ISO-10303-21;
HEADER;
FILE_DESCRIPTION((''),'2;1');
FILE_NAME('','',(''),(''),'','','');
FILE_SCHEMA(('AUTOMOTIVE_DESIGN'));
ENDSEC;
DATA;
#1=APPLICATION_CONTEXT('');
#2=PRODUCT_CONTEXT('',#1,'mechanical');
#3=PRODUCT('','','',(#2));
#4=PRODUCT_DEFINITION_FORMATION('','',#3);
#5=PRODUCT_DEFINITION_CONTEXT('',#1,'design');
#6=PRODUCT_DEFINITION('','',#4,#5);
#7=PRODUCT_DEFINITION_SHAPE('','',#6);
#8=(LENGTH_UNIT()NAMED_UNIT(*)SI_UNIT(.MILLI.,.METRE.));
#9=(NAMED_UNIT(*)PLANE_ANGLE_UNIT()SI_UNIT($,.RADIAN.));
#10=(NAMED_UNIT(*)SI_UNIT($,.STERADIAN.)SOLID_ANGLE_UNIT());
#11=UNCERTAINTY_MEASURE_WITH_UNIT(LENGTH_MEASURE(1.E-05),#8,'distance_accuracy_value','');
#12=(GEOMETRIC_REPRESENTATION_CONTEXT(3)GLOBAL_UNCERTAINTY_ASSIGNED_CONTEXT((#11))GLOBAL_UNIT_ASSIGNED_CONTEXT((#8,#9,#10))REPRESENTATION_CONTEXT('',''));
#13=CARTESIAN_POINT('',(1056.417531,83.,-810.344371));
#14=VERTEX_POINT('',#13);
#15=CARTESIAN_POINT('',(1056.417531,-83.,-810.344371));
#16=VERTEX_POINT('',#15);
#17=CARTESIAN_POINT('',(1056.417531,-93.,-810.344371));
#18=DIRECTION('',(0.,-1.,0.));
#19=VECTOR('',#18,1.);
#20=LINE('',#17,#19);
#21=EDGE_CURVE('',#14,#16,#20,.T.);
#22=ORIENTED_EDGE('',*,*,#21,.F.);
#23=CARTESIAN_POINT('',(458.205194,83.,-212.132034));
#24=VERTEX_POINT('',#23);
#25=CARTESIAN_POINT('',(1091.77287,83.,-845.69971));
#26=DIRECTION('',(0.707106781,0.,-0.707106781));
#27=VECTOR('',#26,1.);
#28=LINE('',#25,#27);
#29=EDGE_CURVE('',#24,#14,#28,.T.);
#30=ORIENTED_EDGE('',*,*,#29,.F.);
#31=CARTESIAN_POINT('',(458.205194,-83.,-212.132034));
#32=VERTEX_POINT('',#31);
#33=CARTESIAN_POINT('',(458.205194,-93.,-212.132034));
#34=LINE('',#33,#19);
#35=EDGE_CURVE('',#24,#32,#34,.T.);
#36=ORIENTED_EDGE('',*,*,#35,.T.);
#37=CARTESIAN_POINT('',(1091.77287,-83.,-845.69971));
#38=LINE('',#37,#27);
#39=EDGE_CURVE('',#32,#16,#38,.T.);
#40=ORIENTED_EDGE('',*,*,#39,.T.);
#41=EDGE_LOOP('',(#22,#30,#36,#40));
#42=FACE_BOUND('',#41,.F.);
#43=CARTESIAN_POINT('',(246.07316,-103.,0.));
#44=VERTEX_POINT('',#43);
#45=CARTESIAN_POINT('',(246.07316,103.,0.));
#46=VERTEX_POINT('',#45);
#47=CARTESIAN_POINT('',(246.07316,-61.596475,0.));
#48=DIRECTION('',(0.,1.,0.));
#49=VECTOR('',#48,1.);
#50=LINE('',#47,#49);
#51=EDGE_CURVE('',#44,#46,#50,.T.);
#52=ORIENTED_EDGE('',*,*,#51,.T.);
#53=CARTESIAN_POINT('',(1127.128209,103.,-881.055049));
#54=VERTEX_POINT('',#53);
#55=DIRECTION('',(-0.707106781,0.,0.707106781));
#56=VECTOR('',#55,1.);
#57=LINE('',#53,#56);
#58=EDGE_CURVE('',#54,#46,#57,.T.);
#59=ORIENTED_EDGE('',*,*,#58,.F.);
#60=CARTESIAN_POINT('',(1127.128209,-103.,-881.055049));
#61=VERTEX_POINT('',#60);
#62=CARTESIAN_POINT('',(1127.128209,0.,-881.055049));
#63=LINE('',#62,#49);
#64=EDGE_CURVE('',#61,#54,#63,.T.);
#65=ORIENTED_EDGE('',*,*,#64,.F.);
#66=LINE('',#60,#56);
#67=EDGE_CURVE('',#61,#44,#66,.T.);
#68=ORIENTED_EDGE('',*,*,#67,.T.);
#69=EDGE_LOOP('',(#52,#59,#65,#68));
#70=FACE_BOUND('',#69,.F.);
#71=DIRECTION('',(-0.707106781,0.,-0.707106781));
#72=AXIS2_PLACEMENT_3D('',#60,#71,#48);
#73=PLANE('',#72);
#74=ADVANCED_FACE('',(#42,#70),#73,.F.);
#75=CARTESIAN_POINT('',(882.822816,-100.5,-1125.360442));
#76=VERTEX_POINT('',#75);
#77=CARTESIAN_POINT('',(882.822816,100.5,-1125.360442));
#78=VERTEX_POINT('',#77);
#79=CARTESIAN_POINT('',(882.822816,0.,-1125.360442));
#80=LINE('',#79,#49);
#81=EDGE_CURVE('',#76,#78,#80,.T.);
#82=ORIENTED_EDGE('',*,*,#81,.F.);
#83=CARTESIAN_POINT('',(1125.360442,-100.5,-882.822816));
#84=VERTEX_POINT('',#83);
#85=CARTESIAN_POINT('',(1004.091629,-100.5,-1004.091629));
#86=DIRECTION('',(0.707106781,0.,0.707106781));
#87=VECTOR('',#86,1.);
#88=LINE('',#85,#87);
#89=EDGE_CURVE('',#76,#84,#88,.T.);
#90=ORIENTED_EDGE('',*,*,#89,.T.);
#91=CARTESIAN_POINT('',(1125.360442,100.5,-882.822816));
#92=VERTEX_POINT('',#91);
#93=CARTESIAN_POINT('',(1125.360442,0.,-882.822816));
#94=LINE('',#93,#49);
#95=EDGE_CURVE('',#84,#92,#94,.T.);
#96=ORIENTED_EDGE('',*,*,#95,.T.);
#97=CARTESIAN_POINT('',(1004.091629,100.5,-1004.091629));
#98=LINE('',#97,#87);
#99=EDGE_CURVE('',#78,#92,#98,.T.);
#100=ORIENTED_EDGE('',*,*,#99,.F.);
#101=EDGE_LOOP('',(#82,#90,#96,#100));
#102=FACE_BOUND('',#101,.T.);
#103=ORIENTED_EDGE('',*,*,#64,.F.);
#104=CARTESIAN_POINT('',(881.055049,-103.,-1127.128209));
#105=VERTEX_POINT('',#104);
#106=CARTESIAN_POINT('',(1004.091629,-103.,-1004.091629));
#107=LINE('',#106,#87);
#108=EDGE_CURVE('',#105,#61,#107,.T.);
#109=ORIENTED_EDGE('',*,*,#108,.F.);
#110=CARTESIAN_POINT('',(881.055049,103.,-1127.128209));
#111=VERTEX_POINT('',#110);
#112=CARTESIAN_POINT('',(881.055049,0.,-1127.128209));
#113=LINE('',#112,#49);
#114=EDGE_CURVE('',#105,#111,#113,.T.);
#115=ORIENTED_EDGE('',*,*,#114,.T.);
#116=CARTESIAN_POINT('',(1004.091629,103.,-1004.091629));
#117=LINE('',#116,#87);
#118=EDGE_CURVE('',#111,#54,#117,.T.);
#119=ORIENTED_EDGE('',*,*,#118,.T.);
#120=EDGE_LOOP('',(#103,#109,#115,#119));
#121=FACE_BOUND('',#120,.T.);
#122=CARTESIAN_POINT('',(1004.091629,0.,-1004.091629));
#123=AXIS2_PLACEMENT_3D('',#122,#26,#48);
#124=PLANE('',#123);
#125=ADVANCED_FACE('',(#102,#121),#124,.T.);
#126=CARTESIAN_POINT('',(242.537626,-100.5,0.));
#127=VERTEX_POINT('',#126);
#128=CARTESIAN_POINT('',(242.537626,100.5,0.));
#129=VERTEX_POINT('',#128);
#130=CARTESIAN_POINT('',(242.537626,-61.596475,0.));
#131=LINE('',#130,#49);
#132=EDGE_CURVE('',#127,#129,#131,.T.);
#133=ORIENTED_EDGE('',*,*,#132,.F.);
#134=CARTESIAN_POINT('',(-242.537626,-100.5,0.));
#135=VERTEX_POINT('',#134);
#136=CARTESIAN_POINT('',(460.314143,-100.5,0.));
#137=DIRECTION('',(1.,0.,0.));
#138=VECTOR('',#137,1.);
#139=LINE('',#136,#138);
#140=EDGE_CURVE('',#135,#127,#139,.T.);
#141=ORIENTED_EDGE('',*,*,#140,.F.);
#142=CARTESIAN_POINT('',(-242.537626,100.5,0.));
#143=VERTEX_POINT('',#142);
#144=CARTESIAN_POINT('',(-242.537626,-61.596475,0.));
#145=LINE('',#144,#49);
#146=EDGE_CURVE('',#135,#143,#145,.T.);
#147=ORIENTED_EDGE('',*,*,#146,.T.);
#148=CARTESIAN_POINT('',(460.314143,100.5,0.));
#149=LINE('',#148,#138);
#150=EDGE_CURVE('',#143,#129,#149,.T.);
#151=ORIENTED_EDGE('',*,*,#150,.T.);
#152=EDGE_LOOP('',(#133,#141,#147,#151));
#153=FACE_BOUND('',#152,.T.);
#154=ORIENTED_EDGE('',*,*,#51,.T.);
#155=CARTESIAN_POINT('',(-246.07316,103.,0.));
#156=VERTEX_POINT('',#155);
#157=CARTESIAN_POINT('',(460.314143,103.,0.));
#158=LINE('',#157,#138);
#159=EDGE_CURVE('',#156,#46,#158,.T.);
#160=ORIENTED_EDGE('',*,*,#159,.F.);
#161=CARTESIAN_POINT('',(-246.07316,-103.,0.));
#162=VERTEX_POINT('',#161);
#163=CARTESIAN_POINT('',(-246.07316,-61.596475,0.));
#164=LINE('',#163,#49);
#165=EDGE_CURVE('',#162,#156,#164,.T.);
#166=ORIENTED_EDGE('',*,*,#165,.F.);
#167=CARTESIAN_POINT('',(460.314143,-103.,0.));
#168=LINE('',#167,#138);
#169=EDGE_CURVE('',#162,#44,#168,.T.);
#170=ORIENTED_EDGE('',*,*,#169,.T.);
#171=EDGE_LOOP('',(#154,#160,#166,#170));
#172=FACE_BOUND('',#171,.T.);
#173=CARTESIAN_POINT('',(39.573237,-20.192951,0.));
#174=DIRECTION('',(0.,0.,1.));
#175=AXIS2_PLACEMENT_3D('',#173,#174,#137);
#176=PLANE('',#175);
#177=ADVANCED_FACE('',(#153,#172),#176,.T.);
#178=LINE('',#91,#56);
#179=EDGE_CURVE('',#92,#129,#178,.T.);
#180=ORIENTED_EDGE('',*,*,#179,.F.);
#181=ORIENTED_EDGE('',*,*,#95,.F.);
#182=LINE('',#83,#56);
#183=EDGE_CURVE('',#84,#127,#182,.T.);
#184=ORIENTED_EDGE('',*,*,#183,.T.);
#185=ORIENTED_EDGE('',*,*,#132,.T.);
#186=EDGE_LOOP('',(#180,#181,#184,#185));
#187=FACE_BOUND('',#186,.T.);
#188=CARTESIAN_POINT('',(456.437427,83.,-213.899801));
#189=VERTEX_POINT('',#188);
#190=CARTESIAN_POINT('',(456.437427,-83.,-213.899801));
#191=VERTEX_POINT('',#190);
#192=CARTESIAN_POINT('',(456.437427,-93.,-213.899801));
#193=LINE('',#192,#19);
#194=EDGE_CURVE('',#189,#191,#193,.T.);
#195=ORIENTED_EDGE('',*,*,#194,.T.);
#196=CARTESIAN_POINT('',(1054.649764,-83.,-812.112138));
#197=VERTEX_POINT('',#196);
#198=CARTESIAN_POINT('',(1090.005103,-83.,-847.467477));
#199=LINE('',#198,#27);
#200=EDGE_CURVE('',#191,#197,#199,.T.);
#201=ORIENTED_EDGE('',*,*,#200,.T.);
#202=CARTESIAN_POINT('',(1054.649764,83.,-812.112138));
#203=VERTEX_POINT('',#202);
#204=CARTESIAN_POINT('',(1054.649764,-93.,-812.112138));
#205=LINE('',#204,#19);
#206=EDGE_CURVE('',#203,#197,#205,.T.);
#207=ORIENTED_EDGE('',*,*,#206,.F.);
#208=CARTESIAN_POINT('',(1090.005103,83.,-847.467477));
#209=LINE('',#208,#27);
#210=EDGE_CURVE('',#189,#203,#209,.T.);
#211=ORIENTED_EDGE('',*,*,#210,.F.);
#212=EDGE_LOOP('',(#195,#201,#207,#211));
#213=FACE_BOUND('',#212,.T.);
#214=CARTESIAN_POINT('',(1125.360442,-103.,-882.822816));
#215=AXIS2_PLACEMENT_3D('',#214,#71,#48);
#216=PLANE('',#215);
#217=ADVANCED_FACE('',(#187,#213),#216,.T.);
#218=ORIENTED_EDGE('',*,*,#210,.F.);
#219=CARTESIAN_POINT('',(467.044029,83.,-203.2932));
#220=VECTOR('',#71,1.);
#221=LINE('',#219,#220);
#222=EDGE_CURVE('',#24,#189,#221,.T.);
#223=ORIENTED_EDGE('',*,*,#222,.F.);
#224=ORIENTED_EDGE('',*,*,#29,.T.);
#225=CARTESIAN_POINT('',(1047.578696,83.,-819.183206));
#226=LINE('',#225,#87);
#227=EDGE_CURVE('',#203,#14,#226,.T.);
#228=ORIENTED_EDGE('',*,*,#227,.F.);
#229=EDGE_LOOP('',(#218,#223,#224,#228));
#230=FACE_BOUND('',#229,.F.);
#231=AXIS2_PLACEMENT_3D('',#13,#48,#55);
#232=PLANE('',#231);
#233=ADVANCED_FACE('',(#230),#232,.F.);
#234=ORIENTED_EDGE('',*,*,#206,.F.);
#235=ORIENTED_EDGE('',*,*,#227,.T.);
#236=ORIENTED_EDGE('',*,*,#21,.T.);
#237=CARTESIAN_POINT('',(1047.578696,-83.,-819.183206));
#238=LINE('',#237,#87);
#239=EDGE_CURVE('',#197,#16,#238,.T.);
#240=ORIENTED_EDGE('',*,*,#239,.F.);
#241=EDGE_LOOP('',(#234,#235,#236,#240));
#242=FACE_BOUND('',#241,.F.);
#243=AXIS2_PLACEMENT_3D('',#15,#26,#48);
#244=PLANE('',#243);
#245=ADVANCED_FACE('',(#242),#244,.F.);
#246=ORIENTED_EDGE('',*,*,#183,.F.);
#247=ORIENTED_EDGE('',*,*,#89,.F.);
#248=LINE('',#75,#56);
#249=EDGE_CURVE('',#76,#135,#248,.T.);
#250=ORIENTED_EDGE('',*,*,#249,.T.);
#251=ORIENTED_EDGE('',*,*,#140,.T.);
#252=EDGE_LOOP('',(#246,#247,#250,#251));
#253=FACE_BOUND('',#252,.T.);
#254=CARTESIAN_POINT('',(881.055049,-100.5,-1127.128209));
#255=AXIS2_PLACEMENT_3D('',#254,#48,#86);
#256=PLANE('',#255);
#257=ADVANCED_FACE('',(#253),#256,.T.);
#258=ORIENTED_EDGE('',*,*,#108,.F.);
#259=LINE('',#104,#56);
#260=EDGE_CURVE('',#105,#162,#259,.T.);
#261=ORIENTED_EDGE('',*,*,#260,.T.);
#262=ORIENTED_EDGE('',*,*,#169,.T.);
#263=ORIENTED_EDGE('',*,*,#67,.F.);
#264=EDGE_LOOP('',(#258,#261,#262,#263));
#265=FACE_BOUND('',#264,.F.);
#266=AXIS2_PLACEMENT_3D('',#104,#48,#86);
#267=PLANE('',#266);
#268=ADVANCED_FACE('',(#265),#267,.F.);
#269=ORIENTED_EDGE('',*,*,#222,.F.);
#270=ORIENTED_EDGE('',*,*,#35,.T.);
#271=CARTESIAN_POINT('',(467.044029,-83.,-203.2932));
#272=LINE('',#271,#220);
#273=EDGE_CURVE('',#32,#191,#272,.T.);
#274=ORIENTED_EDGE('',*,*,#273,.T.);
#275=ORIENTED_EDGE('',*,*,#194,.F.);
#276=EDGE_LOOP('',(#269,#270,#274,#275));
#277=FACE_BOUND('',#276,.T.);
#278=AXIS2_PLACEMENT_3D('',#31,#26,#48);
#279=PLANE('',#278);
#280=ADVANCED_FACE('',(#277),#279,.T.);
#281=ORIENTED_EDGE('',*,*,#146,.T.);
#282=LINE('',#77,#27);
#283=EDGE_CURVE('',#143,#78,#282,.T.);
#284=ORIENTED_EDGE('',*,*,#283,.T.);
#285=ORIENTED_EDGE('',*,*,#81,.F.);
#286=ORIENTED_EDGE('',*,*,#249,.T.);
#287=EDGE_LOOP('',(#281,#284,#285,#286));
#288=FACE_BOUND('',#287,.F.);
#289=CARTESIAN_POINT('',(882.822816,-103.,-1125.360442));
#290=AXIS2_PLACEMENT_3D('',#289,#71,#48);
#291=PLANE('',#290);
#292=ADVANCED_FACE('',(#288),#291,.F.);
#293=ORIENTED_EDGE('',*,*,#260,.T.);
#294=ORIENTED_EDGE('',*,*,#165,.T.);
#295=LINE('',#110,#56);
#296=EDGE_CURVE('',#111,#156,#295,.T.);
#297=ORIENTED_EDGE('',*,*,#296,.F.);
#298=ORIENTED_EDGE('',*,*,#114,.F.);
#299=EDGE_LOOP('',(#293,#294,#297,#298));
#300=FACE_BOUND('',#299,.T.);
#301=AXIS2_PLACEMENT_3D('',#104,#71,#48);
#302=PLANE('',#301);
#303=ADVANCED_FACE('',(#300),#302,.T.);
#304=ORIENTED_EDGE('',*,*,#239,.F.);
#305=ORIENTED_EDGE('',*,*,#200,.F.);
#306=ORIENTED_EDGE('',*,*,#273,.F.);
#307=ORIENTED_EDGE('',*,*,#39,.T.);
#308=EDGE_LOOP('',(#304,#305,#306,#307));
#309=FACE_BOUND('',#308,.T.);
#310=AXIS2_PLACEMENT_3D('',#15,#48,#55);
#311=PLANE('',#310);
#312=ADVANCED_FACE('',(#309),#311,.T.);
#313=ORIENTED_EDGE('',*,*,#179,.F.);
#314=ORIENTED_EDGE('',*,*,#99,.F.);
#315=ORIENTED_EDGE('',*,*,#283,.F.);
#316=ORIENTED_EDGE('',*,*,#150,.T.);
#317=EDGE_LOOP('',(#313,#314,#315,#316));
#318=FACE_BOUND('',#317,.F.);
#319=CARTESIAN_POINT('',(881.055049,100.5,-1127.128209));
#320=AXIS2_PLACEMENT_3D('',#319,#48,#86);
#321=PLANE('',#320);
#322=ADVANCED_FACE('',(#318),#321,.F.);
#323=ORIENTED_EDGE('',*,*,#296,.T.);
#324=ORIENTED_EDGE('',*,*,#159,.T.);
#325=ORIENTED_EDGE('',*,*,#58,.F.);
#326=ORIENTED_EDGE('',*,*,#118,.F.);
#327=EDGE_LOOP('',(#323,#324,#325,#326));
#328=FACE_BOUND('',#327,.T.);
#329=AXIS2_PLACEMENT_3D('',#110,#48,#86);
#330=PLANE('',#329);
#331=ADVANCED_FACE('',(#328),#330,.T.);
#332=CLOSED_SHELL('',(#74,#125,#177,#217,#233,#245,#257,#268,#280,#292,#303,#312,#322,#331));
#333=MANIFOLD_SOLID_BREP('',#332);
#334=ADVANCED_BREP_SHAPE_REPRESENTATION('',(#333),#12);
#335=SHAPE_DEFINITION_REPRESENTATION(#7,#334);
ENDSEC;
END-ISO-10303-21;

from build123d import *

# Parameters (mm, degrees)
F4_W      = 206
F4_H      = 348
F5_DEPTH  = 1800
F6_T      = -2.5
F7_W      = 1062.3749792576
F7_H      = 600.0114679337
F8_DEPTH  = 391.7381567773
F9_W      = 166
F9_H      = 846
F10_DEPTH = 12.5


with BuildPart() as f5:
    # F4 (on face) → F5 (new body)
    with BuildSketch(Plane(origin=(1004.0916292849, 0, -1004.0916292849), x_dir=(0, 1, 0), z_dir=(0.7071067812, 0, -0.7071067812))):
        Rectangle(F4_W, F4_H)
    extrude(amount=-F5_DEPTH)

    # F6
    f6_openings = [f5.faces().sort_by_distance(p)[0] for p in [
        (1004.091629, 0, -1004.091629),
    ]]
    offset(amount=F6_T, openings=f6_openings)

    # F7 (on Top) → F8 (cut, through all)
    with BuildSketch(Plane.XY):
        with Locations((39.5732372999, -20.192950964)):
            Rectangle(F7_W, F7_H)
    extrude(amount=F8_DEPTH, mode=Mode.SUBTRACT)

    # F9 (on face) → F10 (cut, symmetric)
    with BuildSketch(Plane(origin=(123.0365799265, 0, 123.0365799265), x_dir=(0, 1, 0), z_dir=(0.7071067812, 0, 0.7071067812))):
        with Locations((0, -897)):
            Rectangle(F9_W, F9_H)
    extrude(amount=F10_DEPTH, both=True, mode=Mode.SUBTRACT)


solid = f5.part
